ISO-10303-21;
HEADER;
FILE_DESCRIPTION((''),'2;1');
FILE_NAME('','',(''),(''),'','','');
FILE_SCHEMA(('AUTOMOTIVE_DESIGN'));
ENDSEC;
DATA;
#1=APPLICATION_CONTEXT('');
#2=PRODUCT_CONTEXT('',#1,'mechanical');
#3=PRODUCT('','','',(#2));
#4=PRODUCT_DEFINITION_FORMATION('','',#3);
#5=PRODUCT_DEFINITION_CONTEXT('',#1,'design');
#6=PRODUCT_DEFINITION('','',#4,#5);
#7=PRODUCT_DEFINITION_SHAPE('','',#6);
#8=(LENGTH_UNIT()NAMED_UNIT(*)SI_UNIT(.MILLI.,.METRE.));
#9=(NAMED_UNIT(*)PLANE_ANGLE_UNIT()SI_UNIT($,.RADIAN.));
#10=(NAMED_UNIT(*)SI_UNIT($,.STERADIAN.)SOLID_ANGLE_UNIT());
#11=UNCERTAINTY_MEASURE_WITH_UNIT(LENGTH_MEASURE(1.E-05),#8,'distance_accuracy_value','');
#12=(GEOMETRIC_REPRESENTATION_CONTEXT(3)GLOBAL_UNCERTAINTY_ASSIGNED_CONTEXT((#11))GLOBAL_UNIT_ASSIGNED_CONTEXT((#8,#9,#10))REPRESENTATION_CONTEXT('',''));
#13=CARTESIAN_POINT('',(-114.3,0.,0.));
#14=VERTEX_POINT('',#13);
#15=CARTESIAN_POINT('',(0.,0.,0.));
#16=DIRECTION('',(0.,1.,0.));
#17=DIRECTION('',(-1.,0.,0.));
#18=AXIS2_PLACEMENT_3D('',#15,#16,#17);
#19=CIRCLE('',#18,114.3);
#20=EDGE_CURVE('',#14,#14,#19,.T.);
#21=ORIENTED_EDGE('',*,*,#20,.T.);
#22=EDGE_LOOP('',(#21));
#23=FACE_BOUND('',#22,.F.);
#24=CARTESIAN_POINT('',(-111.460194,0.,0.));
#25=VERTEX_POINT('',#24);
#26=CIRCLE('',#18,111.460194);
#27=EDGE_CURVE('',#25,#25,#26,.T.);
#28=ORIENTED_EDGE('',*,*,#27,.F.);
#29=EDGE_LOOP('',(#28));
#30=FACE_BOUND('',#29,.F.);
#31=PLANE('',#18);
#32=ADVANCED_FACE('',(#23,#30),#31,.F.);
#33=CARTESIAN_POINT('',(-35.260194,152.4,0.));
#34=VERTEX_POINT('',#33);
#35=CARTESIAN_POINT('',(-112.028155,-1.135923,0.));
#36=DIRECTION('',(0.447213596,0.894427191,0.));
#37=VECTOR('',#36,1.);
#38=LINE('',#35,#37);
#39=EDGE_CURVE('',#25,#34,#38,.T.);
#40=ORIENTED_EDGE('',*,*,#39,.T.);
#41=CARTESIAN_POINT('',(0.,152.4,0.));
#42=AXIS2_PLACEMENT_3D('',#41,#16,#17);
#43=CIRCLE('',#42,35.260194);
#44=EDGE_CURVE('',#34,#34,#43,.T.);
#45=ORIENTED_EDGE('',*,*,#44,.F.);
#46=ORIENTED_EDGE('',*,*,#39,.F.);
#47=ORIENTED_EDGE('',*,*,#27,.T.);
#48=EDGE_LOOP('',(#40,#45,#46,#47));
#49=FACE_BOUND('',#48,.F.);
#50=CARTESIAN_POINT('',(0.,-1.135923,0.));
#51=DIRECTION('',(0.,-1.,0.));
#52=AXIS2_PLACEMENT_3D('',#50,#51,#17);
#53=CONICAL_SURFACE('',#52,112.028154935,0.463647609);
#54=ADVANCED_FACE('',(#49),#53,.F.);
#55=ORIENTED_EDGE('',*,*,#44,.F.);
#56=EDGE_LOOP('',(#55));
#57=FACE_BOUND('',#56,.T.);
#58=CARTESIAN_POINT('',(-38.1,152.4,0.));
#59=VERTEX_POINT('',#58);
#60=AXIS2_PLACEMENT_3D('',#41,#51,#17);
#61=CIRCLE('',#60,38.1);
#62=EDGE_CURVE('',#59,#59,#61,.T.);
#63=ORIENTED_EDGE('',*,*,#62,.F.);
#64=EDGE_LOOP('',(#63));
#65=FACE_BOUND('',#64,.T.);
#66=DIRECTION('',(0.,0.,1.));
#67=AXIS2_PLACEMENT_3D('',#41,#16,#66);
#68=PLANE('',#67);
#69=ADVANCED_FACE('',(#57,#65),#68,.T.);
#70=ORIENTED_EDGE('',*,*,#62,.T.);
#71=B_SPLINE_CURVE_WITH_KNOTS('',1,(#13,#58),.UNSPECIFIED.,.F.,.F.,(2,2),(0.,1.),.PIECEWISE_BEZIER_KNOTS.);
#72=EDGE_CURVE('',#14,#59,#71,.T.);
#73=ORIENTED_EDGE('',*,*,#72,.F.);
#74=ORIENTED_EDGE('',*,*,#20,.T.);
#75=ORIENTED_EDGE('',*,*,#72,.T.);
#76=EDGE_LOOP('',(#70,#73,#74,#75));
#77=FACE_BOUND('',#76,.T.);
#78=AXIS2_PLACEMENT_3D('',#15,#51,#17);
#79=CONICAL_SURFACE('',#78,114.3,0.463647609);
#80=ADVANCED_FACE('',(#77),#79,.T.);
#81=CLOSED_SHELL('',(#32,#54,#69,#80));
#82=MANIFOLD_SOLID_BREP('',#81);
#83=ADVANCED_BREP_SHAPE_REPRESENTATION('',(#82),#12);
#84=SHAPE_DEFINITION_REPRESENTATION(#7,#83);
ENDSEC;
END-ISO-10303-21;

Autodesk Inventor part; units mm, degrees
ref_plane "YZ Plane" through (0, 0, 0) normal (1, 0, 0) x (0, 1, 0)
ref_plane "XZ Plane" through (0, 0, 0) normal (0, 1, 0) x (-1, 0, 0)
ref_plane "XY Plane" through (0, 0, 0) normal (0, 0, 1) x (1, 0, 0)
sketch "Sketch1" plane through (0, 0, 0) normal (0, 1, 0) x (-1, 0, 0)
  circle A0 centre (0, 0) radius 114.3
  line L0 (0, 0) -> (-114.3, 0)
  dimension "d20" = 228.6
sketch3d "3D Sketch3"
ref_plane "Work Plane6" through (0, 152.4, 0) normal (0, 1, 0) x (0, 0, 1)
sketch "Sketch8" plane through (0, 152.4, 0) normal (0, 1, 0) x (0, 0, 1)
  circle A0 centre (0, 0) radius 38.1
  point P0 (0, 0)
  dimension "d14" = 76.2
loft "Loft1" add profiles "Sketch1", "Sketch8"
shell "Shell1" thickness 2.54 removed faces 2 at (4.3637, 152.4, 0.9393) at (-34.4881, 0, 8.72)
properties part number "Funnel1"
